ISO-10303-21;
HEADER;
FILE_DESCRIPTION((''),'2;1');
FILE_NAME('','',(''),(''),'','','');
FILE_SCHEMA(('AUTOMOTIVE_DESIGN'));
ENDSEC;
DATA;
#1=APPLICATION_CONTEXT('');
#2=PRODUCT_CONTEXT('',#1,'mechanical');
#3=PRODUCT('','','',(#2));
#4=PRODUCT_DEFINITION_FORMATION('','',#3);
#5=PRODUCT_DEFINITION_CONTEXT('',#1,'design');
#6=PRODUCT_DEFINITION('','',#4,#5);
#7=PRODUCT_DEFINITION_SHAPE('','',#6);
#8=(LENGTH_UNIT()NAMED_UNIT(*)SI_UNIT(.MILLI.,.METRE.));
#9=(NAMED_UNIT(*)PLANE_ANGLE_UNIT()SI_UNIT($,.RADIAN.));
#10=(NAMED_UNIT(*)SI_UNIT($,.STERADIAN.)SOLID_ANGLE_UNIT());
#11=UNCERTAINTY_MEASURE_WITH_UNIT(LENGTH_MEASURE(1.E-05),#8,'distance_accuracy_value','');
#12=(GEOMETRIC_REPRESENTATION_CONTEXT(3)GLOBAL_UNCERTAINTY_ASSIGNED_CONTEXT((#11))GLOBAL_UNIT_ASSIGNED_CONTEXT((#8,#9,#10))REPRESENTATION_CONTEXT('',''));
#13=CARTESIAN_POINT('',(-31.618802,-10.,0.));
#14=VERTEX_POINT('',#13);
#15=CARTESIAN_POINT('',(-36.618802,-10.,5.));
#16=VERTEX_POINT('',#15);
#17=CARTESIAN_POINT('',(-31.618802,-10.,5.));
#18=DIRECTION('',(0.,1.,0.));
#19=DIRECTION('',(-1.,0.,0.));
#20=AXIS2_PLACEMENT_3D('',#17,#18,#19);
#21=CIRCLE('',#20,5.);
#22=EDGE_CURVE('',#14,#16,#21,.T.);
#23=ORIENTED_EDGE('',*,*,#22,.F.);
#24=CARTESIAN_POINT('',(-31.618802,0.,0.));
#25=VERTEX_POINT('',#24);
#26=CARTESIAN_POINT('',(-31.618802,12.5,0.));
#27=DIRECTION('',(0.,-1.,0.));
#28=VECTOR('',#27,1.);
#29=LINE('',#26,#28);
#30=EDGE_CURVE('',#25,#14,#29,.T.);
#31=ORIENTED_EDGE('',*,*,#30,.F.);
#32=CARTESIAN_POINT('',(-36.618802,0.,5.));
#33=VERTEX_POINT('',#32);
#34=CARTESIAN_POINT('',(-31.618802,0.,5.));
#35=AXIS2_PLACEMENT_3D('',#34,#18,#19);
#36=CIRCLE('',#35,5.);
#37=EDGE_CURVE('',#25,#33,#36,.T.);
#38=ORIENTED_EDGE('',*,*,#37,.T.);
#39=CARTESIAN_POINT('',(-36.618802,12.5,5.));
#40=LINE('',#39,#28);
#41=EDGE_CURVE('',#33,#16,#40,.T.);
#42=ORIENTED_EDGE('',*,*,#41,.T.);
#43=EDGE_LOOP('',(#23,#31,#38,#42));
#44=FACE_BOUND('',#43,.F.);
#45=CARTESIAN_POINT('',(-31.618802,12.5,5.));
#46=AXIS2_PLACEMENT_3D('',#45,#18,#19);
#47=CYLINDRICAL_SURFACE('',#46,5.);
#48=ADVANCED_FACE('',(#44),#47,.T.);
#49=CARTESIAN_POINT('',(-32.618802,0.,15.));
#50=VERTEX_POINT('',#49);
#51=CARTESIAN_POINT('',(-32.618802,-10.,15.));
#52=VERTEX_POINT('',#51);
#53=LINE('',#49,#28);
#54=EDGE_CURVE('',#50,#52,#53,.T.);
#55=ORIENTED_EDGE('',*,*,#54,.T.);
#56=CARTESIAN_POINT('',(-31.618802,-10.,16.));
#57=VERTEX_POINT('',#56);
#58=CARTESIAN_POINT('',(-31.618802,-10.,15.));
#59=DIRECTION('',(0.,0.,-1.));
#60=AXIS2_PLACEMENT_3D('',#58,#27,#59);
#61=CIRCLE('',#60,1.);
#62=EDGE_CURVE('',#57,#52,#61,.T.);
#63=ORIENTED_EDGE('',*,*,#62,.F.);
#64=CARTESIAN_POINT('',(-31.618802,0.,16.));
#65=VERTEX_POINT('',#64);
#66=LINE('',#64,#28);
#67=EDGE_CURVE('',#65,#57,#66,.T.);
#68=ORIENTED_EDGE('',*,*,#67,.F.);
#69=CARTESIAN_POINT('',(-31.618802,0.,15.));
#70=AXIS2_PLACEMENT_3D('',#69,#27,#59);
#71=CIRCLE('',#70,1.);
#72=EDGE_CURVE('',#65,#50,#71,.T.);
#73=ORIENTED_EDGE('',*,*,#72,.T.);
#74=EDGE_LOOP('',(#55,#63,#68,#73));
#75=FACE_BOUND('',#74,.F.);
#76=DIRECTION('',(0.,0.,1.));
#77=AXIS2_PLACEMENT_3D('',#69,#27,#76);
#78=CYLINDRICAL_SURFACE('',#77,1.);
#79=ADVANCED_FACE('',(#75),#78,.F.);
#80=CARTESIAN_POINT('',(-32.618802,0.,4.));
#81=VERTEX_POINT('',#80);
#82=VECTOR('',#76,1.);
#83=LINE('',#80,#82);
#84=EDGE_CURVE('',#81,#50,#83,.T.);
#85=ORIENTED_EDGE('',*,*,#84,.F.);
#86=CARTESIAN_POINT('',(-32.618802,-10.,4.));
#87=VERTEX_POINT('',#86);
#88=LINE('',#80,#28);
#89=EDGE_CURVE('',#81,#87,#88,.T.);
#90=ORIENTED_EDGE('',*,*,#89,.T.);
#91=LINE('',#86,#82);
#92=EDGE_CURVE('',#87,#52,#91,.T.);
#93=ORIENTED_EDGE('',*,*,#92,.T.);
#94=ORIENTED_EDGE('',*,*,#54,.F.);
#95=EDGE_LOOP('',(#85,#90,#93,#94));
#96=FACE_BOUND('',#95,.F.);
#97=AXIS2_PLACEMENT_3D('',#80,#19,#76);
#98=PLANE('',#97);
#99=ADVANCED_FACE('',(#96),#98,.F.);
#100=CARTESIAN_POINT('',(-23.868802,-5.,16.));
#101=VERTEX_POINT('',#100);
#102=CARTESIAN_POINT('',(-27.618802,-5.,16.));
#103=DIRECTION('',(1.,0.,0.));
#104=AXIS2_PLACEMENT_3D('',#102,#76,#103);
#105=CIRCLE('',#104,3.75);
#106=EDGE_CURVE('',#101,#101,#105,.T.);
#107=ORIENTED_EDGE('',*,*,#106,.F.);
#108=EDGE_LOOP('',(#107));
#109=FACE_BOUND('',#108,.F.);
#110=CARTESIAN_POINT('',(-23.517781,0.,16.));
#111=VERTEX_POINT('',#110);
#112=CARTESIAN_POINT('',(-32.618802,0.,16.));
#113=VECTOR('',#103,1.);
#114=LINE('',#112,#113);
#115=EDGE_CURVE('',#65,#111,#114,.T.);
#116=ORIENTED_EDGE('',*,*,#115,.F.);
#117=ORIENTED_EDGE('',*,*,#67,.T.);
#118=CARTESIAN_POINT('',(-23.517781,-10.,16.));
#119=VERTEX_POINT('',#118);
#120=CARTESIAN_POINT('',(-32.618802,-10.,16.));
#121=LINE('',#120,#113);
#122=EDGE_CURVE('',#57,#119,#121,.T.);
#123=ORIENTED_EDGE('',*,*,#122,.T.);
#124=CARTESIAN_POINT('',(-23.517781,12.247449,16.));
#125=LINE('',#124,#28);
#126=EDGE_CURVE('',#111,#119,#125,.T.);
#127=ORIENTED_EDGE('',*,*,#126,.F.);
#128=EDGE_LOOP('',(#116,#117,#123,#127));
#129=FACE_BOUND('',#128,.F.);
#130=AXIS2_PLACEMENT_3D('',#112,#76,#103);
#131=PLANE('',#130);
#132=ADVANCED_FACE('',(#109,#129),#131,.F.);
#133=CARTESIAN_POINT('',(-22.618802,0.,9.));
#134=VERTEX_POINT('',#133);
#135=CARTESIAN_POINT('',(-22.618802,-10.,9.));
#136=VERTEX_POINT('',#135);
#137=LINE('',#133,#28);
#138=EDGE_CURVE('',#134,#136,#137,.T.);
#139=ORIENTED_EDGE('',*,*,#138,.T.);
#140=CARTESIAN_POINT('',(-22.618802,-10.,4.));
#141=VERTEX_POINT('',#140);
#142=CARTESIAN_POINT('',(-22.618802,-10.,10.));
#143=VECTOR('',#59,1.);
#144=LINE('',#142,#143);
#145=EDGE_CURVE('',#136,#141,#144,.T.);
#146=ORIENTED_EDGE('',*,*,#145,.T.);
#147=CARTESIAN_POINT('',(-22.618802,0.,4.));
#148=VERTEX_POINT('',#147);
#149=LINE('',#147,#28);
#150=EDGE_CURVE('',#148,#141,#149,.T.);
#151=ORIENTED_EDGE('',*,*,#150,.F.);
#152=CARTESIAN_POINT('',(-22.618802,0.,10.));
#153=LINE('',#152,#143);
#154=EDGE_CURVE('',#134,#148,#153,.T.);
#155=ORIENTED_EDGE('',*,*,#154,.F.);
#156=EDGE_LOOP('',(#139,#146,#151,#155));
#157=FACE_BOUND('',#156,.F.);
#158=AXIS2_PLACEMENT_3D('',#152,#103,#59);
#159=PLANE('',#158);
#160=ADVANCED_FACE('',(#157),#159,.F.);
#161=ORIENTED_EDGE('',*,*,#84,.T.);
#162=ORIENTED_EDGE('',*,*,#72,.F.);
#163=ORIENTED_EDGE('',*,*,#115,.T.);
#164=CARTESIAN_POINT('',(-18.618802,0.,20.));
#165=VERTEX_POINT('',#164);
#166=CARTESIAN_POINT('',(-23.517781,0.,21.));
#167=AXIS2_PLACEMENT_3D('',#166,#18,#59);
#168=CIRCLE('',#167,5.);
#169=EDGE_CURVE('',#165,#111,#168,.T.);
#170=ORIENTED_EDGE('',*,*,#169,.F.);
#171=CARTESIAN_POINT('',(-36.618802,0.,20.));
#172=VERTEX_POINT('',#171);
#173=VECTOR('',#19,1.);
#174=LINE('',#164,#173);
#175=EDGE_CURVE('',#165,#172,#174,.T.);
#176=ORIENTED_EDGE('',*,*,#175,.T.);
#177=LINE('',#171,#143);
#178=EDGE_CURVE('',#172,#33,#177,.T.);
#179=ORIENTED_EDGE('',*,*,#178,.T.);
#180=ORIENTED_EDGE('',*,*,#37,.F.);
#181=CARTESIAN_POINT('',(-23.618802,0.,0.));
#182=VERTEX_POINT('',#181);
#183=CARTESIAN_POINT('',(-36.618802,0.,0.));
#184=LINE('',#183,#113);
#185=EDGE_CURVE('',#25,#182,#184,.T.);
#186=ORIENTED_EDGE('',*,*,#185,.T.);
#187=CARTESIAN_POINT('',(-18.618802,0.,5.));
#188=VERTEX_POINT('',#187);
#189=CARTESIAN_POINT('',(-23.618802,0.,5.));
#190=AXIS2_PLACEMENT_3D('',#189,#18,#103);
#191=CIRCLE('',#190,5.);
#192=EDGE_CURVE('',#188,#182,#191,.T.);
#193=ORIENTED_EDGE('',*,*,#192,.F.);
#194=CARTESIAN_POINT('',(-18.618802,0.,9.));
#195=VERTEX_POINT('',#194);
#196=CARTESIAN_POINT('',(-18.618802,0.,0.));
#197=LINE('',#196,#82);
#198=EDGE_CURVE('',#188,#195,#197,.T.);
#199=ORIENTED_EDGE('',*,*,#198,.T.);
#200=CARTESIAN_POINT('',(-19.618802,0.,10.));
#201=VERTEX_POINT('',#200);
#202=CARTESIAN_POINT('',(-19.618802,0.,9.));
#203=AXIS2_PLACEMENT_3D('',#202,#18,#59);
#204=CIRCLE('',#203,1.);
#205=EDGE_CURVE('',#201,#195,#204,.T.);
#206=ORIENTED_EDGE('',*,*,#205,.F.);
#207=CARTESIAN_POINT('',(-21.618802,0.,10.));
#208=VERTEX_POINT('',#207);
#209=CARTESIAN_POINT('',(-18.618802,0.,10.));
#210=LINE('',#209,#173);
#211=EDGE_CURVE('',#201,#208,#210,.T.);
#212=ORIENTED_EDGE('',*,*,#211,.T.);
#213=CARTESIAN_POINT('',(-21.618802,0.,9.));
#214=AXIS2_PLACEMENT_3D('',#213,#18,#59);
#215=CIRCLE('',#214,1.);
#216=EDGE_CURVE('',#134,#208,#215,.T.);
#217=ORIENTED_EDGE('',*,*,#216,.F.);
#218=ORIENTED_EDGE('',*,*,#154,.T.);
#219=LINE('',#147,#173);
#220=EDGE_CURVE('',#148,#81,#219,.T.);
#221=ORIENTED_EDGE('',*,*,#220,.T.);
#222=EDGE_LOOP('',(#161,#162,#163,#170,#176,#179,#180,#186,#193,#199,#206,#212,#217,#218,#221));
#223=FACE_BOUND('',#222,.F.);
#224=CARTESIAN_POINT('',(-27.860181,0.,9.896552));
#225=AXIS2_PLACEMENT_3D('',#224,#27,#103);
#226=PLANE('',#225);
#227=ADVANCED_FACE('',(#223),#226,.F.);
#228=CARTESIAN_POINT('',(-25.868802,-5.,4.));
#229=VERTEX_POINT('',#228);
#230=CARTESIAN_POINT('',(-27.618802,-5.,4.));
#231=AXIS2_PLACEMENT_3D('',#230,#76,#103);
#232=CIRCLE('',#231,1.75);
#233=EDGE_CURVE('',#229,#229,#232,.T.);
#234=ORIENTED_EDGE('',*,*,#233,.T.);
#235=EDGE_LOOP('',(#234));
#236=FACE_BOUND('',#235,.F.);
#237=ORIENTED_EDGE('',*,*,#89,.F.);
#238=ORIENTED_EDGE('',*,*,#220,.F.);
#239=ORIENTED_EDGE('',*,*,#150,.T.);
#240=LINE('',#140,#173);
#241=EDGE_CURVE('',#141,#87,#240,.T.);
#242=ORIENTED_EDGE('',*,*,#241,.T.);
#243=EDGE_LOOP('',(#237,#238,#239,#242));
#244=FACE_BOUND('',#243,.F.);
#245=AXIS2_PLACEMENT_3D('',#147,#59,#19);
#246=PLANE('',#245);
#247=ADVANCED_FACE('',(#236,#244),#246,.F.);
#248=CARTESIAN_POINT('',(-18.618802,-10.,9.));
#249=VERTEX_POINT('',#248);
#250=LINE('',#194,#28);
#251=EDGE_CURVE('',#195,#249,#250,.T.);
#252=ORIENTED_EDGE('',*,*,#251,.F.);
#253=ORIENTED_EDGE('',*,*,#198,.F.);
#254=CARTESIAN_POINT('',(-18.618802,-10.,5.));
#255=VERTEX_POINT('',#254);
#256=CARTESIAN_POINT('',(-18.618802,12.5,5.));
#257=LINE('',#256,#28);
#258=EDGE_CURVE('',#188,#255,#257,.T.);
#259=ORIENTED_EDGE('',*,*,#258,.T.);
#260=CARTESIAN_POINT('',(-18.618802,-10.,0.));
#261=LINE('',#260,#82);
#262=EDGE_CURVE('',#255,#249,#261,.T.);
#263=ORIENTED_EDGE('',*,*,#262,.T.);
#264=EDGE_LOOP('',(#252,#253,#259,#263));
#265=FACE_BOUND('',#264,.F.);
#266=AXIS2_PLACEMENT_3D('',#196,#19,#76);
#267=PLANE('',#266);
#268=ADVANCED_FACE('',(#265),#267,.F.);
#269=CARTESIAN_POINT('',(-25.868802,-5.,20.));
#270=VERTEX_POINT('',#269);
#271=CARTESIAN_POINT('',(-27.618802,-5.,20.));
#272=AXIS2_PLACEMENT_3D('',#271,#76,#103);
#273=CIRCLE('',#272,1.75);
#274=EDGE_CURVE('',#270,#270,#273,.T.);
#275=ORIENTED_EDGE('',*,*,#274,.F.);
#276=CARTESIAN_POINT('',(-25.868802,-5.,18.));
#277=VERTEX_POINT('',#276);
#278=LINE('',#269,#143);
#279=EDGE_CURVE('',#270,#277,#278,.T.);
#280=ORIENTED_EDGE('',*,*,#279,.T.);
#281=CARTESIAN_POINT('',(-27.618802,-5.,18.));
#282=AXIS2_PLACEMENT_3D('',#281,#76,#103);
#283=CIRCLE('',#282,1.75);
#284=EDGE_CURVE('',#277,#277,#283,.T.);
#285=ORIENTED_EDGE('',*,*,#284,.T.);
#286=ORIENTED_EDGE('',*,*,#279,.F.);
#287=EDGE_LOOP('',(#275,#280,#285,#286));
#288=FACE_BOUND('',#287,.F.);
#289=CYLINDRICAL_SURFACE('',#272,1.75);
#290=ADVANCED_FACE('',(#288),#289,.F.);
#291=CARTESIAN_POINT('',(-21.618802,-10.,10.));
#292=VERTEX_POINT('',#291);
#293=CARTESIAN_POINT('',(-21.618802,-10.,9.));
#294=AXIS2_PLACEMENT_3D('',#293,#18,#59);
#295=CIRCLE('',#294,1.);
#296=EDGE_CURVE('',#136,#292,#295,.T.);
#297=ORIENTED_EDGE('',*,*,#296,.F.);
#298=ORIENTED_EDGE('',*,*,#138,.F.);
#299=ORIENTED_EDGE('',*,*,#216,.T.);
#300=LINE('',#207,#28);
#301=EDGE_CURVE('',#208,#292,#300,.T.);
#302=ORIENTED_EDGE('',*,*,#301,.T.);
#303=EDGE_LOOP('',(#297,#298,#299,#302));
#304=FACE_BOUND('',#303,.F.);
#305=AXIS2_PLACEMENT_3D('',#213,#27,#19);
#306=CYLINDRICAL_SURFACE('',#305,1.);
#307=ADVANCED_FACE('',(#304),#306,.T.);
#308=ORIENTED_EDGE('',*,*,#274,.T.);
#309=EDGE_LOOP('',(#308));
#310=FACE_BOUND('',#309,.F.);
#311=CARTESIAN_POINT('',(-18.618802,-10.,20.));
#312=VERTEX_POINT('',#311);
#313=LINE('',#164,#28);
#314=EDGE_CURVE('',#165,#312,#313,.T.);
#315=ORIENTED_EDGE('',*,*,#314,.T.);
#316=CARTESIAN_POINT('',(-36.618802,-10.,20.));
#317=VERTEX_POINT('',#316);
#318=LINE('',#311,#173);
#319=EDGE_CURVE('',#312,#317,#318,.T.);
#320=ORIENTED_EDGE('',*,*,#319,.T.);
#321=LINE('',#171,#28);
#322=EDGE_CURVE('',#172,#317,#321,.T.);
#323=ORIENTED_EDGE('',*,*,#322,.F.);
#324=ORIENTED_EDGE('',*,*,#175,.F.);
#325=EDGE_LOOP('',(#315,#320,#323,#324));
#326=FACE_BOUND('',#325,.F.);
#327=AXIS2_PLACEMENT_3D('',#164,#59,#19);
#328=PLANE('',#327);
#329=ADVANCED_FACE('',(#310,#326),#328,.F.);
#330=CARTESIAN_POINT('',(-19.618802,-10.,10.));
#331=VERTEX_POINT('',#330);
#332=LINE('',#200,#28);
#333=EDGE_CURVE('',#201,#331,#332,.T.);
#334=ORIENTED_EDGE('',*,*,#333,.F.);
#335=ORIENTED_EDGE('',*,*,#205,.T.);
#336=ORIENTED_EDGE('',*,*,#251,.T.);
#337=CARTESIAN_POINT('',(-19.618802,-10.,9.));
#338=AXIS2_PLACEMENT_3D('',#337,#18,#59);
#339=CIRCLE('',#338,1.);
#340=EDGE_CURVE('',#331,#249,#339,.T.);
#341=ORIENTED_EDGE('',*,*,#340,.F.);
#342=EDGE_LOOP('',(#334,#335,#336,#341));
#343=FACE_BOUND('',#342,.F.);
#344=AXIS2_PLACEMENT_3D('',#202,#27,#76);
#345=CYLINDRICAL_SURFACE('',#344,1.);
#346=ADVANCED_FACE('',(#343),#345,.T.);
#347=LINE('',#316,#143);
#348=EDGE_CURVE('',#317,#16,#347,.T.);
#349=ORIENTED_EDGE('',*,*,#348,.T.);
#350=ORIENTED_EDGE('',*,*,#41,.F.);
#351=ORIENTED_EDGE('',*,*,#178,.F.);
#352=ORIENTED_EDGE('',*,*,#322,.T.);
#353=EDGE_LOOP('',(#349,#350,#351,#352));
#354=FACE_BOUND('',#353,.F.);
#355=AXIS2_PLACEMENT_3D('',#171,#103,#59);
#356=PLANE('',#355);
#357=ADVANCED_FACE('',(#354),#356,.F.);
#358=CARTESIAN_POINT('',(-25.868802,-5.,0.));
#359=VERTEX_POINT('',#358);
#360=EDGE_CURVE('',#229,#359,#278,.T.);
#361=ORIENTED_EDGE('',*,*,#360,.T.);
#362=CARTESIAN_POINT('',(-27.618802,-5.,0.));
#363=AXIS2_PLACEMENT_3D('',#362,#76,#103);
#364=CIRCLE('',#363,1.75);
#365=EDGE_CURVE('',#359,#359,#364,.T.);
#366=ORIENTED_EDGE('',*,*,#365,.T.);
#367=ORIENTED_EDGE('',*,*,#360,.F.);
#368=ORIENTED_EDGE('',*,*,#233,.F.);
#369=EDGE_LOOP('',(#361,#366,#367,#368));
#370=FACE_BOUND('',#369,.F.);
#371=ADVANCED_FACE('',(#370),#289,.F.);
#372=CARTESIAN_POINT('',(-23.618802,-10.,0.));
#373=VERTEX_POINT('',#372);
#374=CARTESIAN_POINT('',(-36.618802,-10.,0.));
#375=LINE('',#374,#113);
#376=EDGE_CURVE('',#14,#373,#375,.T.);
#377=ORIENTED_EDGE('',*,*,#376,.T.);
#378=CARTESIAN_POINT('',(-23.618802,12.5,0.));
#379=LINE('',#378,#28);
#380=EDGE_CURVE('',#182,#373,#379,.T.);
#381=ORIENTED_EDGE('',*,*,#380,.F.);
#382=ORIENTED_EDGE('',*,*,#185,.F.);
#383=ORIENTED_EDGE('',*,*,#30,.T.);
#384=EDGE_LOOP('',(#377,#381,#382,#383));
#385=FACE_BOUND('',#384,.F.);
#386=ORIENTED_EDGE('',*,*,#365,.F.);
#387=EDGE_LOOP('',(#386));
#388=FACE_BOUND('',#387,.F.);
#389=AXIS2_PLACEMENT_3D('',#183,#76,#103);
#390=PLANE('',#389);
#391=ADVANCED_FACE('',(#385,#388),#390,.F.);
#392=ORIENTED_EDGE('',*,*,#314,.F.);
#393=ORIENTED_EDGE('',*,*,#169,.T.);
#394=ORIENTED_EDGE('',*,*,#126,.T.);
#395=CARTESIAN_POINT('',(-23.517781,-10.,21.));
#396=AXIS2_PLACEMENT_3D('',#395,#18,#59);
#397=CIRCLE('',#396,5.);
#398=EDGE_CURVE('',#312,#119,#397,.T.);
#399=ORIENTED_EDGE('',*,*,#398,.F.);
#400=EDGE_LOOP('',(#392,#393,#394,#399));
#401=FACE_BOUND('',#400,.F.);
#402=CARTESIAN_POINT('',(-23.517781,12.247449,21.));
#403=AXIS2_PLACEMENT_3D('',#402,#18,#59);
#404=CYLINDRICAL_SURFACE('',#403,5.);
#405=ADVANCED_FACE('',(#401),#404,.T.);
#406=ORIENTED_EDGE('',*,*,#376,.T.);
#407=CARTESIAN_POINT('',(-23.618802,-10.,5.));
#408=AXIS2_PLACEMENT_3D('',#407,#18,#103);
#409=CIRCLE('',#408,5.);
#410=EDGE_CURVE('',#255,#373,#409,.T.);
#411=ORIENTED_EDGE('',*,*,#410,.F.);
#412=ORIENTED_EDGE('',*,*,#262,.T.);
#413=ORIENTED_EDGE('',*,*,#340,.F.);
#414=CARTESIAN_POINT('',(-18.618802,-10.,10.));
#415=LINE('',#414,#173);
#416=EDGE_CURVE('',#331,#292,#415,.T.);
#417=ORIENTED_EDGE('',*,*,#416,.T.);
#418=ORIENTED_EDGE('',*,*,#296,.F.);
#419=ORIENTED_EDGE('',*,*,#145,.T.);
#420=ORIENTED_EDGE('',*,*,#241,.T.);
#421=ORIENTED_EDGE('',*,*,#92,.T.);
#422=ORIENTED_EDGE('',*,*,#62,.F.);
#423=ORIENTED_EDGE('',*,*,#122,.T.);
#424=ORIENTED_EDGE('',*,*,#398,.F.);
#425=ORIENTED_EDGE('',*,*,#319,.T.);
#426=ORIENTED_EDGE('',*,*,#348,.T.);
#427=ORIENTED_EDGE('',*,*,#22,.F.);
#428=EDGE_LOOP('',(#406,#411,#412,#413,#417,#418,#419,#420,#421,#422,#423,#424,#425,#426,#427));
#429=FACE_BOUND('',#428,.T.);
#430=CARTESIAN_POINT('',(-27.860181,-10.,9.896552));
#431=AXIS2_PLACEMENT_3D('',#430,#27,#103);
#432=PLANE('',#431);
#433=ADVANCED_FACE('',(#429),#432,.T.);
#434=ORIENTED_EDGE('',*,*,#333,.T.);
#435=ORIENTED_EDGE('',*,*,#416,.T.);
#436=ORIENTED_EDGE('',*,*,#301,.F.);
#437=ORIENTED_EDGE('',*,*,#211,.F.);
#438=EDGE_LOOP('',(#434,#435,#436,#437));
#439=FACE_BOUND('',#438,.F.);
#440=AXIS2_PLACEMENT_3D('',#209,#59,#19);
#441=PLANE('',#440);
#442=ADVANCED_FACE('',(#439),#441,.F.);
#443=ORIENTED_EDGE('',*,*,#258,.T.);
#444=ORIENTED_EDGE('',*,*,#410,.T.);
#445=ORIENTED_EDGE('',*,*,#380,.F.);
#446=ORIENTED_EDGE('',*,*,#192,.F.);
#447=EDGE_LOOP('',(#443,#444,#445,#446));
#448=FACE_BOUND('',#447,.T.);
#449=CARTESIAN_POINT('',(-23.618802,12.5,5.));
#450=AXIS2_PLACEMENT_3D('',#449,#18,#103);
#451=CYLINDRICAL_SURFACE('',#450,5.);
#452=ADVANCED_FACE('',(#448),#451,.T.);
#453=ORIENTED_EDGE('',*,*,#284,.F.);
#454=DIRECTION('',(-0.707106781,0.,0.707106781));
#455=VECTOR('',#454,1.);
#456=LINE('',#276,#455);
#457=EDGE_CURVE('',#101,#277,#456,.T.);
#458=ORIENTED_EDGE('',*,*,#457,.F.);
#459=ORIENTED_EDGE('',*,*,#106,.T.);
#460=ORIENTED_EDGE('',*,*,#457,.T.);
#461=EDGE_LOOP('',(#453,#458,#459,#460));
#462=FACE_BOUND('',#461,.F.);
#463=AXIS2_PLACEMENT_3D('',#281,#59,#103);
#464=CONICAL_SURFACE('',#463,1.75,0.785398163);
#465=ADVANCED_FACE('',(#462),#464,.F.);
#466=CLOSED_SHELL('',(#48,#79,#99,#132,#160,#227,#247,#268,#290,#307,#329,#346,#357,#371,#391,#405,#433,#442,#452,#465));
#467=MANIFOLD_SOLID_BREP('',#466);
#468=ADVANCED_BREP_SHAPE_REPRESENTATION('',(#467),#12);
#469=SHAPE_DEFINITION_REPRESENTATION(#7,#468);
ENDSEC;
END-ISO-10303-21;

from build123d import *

# Parameters (mm, degrees)
F1_DEPTH    = 10
F2_T1_DEPTH = 34.4948974279
F2_T3_DEPTH = 35
F3_R        = 1
F4_R        = 1.75
F5_DEPTH    = 20.001
F6_SIZE     = 2


# Not quite as in the source:
# - a fillet or chamfer that OpenCascade refuses, or shapes differently, is made with other operations: its cross-section is extruded or revolved along the edge and cut away or added


with BuildPart() as f1:
    # F0 (on Front) → F1 (new body)
    with BuildSketch(Plane.XZ):
        Polygon((-18.6188016892, 16), (-18.6188016892, 20), (-36.6188016892, 20), (-36.6188016892, 0), (-18.6188016892, 0), (-18.6188016892, 10), (-22.6188016892, 10), (-22.6188016892, 4), (-32.6188016892, 4), (-32.6188016892, 16), align=None)
    extrude(amount=F1_DEPTH)

    # F2: fillet of radius 5 on 3 edges, made by hand

    # F2_s2 → F2_t1 (cut)
    with BuildSketch(Plane.XZ.offset(-12.2474487139)):
        with BuildLine():
            ThreePointArc((-23.5177811747, 16), (-20.3555035146, 17.1270166538), (-18.6188016892, 20))
            Line((-18.6188016892, 20), (-18.6188016892, 16))
            Line((-18.6188016892, 16), (-23.5177811747, 16))
        make_face()
    extrude(amount=F2_T1_DEPTH, mode=Mode.SUBTRACT)

    # F2_s4 → F2_t3 (cut)
    with BuildSketch(Plane.XZ.offset(-12.5)):
        with BuildLine():
            ThreePointArc((-18.6188016892, 5), (-20.0832677832, 1.4644660941), (-23.6188016892, 0))
            Line((-23.6188016892, 0), (-18.6188016892, 0))
            Line((-18.6188016892, 0), (-18.6188016892, 5))
        make_face()
        with BuildLine():
            ThreePointArc((-36.6188016892, 5), (-35.1543355951, 1.4644660941), (-31.6188016892, 0))
            Line((-31.6188016892, 0), (-36.6188016892, 0))
            Line((-36.6188016892, 0), (-36.6188016892, 5))
        make_face()
    extrude(amount=F2_T3_DEPTH, mode=Mode.SUBTRACT)

    # F3
    f3_edges = [f1.edges().sort_by_distance(p)[0] for p in [
        (-18.618802, -5, 10),
        (-22.618802, -5, 10),
        (-32.618802, -5, 16),
    ]]
    fillet(f3_edges, radius=F3_R)

    # F4 (on face) → F5 (cut, through all)
    with BuildSketch(Plane.XY.offset(20)):
        with Locations((-27.6188016892, -5)):
            Circle(F4_R)
    extrude(amount=-F5_DEPTH, mode=Mode.SUBTRACT)

    # F6
    f6_edges = [f1.edges().sort_by_distance(p)[0] for p in [
        (-29.368802, -5, 16),
    ]]
    chamfer(f6_edges, length=F6_SIZE)


solid = f1.part
